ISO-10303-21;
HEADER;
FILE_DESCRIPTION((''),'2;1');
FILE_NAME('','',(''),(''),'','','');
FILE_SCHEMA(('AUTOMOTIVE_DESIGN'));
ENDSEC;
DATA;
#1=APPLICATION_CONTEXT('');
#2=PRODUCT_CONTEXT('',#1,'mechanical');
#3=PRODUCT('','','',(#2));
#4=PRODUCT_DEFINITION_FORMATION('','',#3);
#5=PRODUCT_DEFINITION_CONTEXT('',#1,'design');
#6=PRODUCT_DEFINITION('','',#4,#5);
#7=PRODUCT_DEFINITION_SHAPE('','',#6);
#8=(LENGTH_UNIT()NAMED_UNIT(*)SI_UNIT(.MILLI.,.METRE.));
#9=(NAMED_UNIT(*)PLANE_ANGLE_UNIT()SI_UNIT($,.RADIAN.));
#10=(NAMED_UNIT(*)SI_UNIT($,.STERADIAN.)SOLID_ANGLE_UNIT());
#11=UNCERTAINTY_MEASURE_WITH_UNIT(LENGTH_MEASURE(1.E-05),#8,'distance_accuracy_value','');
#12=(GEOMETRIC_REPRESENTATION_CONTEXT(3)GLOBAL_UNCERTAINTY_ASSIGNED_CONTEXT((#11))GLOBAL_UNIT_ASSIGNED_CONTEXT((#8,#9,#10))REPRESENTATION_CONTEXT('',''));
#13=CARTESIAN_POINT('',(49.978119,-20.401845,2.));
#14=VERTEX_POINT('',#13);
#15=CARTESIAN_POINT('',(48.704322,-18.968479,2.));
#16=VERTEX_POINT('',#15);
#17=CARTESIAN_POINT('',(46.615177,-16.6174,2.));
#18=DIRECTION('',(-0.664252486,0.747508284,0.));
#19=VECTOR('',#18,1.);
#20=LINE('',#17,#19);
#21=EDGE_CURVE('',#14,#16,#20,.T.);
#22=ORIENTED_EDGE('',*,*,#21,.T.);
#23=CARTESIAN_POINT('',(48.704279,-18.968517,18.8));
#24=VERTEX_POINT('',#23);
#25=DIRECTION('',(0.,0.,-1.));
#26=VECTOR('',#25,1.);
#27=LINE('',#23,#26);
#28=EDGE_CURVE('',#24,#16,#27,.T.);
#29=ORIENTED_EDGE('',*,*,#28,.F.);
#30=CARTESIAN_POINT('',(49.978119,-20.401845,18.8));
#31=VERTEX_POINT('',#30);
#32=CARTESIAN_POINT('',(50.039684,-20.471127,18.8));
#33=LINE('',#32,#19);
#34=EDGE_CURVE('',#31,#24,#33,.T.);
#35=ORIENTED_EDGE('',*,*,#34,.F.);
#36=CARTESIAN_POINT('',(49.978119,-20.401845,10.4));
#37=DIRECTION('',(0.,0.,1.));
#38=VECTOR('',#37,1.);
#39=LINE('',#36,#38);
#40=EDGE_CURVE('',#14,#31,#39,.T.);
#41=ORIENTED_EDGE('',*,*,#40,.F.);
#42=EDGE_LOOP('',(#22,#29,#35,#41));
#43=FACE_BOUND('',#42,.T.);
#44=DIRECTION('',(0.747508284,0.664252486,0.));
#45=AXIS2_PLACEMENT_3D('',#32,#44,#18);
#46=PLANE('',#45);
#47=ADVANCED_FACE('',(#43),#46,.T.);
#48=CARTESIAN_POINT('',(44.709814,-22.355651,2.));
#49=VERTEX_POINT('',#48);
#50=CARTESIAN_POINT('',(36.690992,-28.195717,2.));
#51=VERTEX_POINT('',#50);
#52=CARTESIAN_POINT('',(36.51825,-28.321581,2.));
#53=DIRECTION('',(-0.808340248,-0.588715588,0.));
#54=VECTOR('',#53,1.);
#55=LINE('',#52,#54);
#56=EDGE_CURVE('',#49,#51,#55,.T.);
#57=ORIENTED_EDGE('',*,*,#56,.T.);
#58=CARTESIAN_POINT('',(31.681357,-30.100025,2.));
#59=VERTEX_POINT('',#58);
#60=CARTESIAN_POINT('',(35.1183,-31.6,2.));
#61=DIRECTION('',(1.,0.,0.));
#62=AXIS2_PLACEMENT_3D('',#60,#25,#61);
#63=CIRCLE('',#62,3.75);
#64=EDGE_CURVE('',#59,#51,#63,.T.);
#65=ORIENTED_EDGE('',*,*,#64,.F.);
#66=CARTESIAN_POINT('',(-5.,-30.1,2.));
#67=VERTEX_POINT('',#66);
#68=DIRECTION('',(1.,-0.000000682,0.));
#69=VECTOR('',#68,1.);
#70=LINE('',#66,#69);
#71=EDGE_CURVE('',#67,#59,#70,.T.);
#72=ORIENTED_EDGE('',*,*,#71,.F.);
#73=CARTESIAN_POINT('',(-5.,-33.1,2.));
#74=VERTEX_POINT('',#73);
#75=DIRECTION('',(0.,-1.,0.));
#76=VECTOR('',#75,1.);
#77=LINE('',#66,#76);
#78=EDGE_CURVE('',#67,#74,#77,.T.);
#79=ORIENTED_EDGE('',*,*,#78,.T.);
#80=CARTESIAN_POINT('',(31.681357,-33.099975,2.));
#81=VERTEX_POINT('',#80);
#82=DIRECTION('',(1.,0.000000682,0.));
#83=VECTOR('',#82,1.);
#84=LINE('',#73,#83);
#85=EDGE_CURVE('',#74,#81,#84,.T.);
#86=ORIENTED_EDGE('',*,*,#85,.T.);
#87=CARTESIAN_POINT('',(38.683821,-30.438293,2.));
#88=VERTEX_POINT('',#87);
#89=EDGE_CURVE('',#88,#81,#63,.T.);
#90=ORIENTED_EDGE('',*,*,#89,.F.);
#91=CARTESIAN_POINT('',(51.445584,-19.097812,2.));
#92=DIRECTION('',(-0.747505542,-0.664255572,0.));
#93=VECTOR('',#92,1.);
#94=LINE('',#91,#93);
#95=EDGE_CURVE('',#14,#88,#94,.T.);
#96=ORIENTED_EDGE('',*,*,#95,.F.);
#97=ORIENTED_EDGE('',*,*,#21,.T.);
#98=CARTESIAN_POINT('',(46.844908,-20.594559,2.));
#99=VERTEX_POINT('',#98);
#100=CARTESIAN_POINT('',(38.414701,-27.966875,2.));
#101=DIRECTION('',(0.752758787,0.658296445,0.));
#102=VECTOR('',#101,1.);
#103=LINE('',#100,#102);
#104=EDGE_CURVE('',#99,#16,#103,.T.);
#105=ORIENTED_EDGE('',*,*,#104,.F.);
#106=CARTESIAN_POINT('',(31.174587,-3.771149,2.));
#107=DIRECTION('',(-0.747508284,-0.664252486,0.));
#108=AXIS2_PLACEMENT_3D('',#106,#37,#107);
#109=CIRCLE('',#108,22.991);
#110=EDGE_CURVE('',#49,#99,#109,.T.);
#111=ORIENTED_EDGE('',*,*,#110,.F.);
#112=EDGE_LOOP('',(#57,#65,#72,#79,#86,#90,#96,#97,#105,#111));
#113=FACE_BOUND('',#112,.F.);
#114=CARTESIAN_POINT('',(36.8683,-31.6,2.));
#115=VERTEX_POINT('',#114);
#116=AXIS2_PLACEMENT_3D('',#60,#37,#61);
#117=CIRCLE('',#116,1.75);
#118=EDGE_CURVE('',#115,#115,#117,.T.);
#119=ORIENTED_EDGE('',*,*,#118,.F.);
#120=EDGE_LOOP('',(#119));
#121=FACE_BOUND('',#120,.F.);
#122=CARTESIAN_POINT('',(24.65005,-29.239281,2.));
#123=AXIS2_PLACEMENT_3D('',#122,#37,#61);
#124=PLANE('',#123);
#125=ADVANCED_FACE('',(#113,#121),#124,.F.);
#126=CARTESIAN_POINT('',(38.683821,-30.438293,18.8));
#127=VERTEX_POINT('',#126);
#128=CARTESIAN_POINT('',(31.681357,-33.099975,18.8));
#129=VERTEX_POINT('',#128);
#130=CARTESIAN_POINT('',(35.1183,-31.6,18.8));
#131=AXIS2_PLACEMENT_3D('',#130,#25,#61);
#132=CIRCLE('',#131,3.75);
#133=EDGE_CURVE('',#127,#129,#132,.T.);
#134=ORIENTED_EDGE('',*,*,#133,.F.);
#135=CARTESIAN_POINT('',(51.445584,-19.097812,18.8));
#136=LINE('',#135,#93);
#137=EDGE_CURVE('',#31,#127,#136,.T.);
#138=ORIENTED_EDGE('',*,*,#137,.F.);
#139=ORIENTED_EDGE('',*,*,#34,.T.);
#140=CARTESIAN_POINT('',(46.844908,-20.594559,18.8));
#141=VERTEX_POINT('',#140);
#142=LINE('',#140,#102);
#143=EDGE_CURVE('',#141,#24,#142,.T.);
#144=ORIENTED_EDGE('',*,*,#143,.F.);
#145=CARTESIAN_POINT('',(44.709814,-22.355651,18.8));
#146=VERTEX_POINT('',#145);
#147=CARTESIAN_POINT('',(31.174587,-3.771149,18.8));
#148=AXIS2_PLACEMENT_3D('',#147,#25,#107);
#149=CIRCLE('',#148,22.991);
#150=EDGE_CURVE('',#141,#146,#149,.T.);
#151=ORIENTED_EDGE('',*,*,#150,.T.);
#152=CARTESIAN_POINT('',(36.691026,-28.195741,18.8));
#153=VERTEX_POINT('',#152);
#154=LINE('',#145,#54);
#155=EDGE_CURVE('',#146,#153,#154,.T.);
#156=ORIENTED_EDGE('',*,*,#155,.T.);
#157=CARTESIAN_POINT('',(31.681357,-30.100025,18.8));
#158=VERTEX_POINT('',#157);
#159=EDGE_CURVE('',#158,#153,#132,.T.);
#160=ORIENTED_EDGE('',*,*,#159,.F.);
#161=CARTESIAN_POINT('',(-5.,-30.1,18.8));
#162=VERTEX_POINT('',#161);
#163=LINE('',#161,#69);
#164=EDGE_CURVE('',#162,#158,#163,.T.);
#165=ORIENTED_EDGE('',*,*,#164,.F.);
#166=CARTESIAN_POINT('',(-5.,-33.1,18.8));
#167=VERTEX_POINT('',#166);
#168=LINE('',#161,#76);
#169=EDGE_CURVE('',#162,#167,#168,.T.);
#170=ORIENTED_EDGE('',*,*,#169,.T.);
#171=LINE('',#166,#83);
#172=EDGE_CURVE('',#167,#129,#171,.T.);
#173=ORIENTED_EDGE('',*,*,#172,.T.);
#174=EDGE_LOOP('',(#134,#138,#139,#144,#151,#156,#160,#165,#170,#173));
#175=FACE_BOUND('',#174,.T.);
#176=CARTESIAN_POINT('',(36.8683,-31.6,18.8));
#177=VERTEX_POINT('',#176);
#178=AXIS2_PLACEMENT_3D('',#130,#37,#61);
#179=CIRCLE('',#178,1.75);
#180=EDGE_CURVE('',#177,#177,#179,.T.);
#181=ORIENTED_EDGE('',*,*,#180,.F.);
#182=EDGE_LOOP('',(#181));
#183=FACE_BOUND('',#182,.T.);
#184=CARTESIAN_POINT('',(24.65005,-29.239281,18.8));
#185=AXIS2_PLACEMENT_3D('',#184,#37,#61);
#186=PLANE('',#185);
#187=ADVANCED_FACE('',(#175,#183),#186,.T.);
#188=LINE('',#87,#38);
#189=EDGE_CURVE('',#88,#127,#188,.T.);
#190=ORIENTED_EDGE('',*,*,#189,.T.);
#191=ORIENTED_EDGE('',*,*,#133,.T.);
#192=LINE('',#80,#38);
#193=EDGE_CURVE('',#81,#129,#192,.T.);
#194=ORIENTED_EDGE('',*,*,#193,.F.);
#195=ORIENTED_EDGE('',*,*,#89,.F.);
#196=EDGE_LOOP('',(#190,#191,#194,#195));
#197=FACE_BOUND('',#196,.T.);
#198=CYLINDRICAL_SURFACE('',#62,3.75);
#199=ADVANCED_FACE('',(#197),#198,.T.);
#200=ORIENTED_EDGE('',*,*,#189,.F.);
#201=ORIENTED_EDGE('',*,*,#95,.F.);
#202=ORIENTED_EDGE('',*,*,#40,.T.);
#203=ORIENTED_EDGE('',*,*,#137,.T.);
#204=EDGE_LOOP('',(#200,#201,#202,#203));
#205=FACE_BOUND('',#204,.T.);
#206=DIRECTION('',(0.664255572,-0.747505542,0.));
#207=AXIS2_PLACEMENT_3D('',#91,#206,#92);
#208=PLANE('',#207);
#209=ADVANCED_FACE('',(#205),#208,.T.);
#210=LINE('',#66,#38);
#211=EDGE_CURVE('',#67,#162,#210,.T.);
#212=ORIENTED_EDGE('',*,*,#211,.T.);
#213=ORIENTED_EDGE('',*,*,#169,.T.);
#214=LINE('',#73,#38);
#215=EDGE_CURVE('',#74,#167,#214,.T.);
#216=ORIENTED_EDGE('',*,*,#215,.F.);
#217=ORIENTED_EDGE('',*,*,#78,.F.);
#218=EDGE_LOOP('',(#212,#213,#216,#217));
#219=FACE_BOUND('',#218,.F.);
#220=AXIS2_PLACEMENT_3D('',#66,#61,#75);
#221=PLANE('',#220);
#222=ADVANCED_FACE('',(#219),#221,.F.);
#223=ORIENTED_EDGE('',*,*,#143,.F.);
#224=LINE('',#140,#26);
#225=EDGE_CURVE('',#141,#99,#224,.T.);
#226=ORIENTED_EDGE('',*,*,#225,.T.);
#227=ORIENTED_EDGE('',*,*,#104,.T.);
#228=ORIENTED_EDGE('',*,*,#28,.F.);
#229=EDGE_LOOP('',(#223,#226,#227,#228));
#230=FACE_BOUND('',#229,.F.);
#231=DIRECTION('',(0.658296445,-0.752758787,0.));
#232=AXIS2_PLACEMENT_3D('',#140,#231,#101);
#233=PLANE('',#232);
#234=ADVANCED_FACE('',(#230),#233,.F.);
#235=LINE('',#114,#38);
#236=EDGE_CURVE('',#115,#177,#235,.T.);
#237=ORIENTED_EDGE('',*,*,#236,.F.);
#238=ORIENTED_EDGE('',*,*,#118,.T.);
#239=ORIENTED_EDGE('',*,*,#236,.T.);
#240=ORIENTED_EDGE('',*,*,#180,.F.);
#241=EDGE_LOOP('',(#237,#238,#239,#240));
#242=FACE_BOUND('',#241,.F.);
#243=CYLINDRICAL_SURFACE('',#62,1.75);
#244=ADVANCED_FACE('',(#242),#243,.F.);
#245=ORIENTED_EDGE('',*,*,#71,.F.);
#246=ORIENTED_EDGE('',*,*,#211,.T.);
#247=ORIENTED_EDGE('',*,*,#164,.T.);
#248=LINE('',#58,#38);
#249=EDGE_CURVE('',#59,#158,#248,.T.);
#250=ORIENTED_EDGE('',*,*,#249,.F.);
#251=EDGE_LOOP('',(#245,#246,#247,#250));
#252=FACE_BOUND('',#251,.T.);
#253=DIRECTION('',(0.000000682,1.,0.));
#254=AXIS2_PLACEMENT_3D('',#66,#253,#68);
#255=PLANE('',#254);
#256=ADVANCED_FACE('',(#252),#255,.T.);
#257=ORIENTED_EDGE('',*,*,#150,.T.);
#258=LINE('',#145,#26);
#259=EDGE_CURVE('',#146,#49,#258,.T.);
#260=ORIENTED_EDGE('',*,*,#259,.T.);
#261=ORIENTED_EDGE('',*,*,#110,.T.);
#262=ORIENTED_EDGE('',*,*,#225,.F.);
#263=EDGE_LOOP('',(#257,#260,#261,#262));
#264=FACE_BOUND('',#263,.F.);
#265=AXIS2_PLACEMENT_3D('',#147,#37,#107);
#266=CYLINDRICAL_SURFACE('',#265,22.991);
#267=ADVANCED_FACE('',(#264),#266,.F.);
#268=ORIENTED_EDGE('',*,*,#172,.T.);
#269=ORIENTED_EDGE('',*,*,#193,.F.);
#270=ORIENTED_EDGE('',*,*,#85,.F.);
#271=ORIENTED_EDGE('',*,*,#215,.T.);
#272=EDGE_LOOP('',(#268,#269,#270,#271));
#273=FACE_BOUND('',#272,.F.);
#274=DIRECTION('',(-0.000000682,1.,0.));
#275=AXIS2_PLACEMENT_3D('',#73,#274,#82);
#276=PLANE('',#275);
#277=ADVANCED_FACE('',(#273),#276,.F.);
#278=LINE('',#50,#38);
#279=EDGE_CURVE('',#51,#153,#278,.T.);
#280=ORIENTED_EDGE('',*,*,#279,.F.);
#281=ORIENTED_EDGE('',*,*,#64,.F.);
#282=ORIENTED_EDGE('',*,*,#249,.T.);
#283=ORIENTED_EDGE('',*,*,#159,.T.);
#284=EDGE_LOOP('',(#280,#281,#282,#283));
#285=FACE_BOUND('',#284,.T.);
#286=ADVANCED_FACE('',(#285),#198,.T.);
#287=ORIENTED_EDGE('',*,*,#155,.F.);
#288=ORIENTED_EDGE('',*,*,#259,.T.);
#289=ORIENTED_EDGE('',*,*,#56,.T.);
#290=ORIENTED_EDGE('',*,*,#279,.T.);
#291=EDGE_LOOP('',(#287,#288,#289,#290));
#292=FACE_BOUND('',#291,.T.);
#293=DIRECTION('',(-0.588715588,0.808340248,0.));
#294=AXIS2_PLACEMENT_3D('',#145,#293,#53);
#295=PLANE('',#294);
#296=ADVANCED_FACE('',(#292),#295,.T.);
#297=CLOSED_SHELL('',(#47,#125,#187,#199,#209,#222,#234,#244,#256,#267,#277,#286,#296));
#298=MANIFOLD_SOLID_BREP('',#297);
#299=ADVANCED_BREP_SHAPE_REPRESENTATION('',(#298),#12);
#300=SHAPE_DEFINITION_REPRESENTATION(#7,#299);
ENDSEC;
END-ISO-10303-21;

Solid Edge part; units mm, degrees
sketch "Sketch1" plane through (0, 0, 2) normal (0, 0, 1) x (1, 0, 0)
  line L0 (49.4528, -16.8553) -> (36.691, -28.1957)
  arc A0 (31.6813, -30.1) -> (36.691, -28.1957) centre (35.1183, -31.6) cw
  line L1 (-5, -30.1) -> (31.6813, -30.1)
  line L2 (-5, -30.1) -> (-5, -33.1)
  line L3 (-5, -33.1) -> (31.6813, -33.1)
  line L4 (51.4456, -19.0978) -> (38.6838, -30.4383)
  arc A1 (38.6838, -30.4383) -> (31.6814, -33.1) centre (35.1183, -31.6) cw
  arc A2 (49.4528, -16.8553) -> (51.4456, -19.0978) centre (35.1183, -31.6) cw
  circle A3 centre (35.1183, -31.6) radius 1.75
extrude "ExtrudedProtrusion_1" add sketch "Sketch1" along normal blind 16.8
sketch "Sketch2" plane through (23.2228, -26.1027, 18.8) normal (0, 0, 1) x (-0.7475083, -0.6642525, 0)
  line L0 (-8.6773, 10.5109) -> (-25.7984, 3.6459)
  line L1 (-25.7984, 3.6459) -> (-25.7497, 10.5109)
  arc A0 (-25.7984, 11.5109) -> (-25.7497, 10.5109) centre (-5.2403, 12.0109) ccw
  line L2 (-25.7984, 11.5109) -> (-8.6773, 10.5109)
extrude "ExtrudedCutout_1" cut sketch "Sketch2" against normal blind 126.644
sketch "Sketch3" plane through (23.2228, -26.4602, 18.8) normal (0, 0, 1) x (-0.7475083, -0.6642525, 0)
  line L0 (-24.0241, 11.1261) -> (-27.0554, 10.1886)
  line L1 (-27.0554, 13.3363) -> (-27.0554, 10.1886)
  line L2 (-24.0241, 13.3363) -> (-27.0554, 13.3363)
  line L3 (-24.0241, 13.3363) -> (-24.0241, 11.1261)
extrude "ExtrudedCutout_2" cut sketch "Sketch3" against normal blind 19.824
sketch "Sketch4" plane through (22.489, -27.0845, 18.8) normal (0, 0, 1) x (-0.7475083, -0.6642525, 0)
  line L0 (-9.878, 10.2644) -> (-11.124, 7.7451)
  line L1 (-19.7514, 11.2253) -> (-9.878, 10.2644)
  arc A0 (-22.5172, 11.3271) -> (-19.7514, 11.2253) centre (-21.9785, -11.6575) cw
  line L2 (-22.5172, 11.3271) -> (-24.9872, 11.3468)
  line L3 (-24.9872, 11.1468) -> (-24.9872, 11.3468)
  line L4 (-24.9872, 11.1468) -> (-25.1125, 10.9171)
  line L5 (-25.1125, 10.9171) -> (-25.1125, 10.3529)
  arc A1 (-25.1125, 10.3529) -> (-11.1241, 7.7451) centre (-21.9785, -11.6575) cw
extrude "ExtrudedCutout_3" cut sketch "Sketch4" against normal blind 23.352
properties material "ABS Plastic, high impact"
